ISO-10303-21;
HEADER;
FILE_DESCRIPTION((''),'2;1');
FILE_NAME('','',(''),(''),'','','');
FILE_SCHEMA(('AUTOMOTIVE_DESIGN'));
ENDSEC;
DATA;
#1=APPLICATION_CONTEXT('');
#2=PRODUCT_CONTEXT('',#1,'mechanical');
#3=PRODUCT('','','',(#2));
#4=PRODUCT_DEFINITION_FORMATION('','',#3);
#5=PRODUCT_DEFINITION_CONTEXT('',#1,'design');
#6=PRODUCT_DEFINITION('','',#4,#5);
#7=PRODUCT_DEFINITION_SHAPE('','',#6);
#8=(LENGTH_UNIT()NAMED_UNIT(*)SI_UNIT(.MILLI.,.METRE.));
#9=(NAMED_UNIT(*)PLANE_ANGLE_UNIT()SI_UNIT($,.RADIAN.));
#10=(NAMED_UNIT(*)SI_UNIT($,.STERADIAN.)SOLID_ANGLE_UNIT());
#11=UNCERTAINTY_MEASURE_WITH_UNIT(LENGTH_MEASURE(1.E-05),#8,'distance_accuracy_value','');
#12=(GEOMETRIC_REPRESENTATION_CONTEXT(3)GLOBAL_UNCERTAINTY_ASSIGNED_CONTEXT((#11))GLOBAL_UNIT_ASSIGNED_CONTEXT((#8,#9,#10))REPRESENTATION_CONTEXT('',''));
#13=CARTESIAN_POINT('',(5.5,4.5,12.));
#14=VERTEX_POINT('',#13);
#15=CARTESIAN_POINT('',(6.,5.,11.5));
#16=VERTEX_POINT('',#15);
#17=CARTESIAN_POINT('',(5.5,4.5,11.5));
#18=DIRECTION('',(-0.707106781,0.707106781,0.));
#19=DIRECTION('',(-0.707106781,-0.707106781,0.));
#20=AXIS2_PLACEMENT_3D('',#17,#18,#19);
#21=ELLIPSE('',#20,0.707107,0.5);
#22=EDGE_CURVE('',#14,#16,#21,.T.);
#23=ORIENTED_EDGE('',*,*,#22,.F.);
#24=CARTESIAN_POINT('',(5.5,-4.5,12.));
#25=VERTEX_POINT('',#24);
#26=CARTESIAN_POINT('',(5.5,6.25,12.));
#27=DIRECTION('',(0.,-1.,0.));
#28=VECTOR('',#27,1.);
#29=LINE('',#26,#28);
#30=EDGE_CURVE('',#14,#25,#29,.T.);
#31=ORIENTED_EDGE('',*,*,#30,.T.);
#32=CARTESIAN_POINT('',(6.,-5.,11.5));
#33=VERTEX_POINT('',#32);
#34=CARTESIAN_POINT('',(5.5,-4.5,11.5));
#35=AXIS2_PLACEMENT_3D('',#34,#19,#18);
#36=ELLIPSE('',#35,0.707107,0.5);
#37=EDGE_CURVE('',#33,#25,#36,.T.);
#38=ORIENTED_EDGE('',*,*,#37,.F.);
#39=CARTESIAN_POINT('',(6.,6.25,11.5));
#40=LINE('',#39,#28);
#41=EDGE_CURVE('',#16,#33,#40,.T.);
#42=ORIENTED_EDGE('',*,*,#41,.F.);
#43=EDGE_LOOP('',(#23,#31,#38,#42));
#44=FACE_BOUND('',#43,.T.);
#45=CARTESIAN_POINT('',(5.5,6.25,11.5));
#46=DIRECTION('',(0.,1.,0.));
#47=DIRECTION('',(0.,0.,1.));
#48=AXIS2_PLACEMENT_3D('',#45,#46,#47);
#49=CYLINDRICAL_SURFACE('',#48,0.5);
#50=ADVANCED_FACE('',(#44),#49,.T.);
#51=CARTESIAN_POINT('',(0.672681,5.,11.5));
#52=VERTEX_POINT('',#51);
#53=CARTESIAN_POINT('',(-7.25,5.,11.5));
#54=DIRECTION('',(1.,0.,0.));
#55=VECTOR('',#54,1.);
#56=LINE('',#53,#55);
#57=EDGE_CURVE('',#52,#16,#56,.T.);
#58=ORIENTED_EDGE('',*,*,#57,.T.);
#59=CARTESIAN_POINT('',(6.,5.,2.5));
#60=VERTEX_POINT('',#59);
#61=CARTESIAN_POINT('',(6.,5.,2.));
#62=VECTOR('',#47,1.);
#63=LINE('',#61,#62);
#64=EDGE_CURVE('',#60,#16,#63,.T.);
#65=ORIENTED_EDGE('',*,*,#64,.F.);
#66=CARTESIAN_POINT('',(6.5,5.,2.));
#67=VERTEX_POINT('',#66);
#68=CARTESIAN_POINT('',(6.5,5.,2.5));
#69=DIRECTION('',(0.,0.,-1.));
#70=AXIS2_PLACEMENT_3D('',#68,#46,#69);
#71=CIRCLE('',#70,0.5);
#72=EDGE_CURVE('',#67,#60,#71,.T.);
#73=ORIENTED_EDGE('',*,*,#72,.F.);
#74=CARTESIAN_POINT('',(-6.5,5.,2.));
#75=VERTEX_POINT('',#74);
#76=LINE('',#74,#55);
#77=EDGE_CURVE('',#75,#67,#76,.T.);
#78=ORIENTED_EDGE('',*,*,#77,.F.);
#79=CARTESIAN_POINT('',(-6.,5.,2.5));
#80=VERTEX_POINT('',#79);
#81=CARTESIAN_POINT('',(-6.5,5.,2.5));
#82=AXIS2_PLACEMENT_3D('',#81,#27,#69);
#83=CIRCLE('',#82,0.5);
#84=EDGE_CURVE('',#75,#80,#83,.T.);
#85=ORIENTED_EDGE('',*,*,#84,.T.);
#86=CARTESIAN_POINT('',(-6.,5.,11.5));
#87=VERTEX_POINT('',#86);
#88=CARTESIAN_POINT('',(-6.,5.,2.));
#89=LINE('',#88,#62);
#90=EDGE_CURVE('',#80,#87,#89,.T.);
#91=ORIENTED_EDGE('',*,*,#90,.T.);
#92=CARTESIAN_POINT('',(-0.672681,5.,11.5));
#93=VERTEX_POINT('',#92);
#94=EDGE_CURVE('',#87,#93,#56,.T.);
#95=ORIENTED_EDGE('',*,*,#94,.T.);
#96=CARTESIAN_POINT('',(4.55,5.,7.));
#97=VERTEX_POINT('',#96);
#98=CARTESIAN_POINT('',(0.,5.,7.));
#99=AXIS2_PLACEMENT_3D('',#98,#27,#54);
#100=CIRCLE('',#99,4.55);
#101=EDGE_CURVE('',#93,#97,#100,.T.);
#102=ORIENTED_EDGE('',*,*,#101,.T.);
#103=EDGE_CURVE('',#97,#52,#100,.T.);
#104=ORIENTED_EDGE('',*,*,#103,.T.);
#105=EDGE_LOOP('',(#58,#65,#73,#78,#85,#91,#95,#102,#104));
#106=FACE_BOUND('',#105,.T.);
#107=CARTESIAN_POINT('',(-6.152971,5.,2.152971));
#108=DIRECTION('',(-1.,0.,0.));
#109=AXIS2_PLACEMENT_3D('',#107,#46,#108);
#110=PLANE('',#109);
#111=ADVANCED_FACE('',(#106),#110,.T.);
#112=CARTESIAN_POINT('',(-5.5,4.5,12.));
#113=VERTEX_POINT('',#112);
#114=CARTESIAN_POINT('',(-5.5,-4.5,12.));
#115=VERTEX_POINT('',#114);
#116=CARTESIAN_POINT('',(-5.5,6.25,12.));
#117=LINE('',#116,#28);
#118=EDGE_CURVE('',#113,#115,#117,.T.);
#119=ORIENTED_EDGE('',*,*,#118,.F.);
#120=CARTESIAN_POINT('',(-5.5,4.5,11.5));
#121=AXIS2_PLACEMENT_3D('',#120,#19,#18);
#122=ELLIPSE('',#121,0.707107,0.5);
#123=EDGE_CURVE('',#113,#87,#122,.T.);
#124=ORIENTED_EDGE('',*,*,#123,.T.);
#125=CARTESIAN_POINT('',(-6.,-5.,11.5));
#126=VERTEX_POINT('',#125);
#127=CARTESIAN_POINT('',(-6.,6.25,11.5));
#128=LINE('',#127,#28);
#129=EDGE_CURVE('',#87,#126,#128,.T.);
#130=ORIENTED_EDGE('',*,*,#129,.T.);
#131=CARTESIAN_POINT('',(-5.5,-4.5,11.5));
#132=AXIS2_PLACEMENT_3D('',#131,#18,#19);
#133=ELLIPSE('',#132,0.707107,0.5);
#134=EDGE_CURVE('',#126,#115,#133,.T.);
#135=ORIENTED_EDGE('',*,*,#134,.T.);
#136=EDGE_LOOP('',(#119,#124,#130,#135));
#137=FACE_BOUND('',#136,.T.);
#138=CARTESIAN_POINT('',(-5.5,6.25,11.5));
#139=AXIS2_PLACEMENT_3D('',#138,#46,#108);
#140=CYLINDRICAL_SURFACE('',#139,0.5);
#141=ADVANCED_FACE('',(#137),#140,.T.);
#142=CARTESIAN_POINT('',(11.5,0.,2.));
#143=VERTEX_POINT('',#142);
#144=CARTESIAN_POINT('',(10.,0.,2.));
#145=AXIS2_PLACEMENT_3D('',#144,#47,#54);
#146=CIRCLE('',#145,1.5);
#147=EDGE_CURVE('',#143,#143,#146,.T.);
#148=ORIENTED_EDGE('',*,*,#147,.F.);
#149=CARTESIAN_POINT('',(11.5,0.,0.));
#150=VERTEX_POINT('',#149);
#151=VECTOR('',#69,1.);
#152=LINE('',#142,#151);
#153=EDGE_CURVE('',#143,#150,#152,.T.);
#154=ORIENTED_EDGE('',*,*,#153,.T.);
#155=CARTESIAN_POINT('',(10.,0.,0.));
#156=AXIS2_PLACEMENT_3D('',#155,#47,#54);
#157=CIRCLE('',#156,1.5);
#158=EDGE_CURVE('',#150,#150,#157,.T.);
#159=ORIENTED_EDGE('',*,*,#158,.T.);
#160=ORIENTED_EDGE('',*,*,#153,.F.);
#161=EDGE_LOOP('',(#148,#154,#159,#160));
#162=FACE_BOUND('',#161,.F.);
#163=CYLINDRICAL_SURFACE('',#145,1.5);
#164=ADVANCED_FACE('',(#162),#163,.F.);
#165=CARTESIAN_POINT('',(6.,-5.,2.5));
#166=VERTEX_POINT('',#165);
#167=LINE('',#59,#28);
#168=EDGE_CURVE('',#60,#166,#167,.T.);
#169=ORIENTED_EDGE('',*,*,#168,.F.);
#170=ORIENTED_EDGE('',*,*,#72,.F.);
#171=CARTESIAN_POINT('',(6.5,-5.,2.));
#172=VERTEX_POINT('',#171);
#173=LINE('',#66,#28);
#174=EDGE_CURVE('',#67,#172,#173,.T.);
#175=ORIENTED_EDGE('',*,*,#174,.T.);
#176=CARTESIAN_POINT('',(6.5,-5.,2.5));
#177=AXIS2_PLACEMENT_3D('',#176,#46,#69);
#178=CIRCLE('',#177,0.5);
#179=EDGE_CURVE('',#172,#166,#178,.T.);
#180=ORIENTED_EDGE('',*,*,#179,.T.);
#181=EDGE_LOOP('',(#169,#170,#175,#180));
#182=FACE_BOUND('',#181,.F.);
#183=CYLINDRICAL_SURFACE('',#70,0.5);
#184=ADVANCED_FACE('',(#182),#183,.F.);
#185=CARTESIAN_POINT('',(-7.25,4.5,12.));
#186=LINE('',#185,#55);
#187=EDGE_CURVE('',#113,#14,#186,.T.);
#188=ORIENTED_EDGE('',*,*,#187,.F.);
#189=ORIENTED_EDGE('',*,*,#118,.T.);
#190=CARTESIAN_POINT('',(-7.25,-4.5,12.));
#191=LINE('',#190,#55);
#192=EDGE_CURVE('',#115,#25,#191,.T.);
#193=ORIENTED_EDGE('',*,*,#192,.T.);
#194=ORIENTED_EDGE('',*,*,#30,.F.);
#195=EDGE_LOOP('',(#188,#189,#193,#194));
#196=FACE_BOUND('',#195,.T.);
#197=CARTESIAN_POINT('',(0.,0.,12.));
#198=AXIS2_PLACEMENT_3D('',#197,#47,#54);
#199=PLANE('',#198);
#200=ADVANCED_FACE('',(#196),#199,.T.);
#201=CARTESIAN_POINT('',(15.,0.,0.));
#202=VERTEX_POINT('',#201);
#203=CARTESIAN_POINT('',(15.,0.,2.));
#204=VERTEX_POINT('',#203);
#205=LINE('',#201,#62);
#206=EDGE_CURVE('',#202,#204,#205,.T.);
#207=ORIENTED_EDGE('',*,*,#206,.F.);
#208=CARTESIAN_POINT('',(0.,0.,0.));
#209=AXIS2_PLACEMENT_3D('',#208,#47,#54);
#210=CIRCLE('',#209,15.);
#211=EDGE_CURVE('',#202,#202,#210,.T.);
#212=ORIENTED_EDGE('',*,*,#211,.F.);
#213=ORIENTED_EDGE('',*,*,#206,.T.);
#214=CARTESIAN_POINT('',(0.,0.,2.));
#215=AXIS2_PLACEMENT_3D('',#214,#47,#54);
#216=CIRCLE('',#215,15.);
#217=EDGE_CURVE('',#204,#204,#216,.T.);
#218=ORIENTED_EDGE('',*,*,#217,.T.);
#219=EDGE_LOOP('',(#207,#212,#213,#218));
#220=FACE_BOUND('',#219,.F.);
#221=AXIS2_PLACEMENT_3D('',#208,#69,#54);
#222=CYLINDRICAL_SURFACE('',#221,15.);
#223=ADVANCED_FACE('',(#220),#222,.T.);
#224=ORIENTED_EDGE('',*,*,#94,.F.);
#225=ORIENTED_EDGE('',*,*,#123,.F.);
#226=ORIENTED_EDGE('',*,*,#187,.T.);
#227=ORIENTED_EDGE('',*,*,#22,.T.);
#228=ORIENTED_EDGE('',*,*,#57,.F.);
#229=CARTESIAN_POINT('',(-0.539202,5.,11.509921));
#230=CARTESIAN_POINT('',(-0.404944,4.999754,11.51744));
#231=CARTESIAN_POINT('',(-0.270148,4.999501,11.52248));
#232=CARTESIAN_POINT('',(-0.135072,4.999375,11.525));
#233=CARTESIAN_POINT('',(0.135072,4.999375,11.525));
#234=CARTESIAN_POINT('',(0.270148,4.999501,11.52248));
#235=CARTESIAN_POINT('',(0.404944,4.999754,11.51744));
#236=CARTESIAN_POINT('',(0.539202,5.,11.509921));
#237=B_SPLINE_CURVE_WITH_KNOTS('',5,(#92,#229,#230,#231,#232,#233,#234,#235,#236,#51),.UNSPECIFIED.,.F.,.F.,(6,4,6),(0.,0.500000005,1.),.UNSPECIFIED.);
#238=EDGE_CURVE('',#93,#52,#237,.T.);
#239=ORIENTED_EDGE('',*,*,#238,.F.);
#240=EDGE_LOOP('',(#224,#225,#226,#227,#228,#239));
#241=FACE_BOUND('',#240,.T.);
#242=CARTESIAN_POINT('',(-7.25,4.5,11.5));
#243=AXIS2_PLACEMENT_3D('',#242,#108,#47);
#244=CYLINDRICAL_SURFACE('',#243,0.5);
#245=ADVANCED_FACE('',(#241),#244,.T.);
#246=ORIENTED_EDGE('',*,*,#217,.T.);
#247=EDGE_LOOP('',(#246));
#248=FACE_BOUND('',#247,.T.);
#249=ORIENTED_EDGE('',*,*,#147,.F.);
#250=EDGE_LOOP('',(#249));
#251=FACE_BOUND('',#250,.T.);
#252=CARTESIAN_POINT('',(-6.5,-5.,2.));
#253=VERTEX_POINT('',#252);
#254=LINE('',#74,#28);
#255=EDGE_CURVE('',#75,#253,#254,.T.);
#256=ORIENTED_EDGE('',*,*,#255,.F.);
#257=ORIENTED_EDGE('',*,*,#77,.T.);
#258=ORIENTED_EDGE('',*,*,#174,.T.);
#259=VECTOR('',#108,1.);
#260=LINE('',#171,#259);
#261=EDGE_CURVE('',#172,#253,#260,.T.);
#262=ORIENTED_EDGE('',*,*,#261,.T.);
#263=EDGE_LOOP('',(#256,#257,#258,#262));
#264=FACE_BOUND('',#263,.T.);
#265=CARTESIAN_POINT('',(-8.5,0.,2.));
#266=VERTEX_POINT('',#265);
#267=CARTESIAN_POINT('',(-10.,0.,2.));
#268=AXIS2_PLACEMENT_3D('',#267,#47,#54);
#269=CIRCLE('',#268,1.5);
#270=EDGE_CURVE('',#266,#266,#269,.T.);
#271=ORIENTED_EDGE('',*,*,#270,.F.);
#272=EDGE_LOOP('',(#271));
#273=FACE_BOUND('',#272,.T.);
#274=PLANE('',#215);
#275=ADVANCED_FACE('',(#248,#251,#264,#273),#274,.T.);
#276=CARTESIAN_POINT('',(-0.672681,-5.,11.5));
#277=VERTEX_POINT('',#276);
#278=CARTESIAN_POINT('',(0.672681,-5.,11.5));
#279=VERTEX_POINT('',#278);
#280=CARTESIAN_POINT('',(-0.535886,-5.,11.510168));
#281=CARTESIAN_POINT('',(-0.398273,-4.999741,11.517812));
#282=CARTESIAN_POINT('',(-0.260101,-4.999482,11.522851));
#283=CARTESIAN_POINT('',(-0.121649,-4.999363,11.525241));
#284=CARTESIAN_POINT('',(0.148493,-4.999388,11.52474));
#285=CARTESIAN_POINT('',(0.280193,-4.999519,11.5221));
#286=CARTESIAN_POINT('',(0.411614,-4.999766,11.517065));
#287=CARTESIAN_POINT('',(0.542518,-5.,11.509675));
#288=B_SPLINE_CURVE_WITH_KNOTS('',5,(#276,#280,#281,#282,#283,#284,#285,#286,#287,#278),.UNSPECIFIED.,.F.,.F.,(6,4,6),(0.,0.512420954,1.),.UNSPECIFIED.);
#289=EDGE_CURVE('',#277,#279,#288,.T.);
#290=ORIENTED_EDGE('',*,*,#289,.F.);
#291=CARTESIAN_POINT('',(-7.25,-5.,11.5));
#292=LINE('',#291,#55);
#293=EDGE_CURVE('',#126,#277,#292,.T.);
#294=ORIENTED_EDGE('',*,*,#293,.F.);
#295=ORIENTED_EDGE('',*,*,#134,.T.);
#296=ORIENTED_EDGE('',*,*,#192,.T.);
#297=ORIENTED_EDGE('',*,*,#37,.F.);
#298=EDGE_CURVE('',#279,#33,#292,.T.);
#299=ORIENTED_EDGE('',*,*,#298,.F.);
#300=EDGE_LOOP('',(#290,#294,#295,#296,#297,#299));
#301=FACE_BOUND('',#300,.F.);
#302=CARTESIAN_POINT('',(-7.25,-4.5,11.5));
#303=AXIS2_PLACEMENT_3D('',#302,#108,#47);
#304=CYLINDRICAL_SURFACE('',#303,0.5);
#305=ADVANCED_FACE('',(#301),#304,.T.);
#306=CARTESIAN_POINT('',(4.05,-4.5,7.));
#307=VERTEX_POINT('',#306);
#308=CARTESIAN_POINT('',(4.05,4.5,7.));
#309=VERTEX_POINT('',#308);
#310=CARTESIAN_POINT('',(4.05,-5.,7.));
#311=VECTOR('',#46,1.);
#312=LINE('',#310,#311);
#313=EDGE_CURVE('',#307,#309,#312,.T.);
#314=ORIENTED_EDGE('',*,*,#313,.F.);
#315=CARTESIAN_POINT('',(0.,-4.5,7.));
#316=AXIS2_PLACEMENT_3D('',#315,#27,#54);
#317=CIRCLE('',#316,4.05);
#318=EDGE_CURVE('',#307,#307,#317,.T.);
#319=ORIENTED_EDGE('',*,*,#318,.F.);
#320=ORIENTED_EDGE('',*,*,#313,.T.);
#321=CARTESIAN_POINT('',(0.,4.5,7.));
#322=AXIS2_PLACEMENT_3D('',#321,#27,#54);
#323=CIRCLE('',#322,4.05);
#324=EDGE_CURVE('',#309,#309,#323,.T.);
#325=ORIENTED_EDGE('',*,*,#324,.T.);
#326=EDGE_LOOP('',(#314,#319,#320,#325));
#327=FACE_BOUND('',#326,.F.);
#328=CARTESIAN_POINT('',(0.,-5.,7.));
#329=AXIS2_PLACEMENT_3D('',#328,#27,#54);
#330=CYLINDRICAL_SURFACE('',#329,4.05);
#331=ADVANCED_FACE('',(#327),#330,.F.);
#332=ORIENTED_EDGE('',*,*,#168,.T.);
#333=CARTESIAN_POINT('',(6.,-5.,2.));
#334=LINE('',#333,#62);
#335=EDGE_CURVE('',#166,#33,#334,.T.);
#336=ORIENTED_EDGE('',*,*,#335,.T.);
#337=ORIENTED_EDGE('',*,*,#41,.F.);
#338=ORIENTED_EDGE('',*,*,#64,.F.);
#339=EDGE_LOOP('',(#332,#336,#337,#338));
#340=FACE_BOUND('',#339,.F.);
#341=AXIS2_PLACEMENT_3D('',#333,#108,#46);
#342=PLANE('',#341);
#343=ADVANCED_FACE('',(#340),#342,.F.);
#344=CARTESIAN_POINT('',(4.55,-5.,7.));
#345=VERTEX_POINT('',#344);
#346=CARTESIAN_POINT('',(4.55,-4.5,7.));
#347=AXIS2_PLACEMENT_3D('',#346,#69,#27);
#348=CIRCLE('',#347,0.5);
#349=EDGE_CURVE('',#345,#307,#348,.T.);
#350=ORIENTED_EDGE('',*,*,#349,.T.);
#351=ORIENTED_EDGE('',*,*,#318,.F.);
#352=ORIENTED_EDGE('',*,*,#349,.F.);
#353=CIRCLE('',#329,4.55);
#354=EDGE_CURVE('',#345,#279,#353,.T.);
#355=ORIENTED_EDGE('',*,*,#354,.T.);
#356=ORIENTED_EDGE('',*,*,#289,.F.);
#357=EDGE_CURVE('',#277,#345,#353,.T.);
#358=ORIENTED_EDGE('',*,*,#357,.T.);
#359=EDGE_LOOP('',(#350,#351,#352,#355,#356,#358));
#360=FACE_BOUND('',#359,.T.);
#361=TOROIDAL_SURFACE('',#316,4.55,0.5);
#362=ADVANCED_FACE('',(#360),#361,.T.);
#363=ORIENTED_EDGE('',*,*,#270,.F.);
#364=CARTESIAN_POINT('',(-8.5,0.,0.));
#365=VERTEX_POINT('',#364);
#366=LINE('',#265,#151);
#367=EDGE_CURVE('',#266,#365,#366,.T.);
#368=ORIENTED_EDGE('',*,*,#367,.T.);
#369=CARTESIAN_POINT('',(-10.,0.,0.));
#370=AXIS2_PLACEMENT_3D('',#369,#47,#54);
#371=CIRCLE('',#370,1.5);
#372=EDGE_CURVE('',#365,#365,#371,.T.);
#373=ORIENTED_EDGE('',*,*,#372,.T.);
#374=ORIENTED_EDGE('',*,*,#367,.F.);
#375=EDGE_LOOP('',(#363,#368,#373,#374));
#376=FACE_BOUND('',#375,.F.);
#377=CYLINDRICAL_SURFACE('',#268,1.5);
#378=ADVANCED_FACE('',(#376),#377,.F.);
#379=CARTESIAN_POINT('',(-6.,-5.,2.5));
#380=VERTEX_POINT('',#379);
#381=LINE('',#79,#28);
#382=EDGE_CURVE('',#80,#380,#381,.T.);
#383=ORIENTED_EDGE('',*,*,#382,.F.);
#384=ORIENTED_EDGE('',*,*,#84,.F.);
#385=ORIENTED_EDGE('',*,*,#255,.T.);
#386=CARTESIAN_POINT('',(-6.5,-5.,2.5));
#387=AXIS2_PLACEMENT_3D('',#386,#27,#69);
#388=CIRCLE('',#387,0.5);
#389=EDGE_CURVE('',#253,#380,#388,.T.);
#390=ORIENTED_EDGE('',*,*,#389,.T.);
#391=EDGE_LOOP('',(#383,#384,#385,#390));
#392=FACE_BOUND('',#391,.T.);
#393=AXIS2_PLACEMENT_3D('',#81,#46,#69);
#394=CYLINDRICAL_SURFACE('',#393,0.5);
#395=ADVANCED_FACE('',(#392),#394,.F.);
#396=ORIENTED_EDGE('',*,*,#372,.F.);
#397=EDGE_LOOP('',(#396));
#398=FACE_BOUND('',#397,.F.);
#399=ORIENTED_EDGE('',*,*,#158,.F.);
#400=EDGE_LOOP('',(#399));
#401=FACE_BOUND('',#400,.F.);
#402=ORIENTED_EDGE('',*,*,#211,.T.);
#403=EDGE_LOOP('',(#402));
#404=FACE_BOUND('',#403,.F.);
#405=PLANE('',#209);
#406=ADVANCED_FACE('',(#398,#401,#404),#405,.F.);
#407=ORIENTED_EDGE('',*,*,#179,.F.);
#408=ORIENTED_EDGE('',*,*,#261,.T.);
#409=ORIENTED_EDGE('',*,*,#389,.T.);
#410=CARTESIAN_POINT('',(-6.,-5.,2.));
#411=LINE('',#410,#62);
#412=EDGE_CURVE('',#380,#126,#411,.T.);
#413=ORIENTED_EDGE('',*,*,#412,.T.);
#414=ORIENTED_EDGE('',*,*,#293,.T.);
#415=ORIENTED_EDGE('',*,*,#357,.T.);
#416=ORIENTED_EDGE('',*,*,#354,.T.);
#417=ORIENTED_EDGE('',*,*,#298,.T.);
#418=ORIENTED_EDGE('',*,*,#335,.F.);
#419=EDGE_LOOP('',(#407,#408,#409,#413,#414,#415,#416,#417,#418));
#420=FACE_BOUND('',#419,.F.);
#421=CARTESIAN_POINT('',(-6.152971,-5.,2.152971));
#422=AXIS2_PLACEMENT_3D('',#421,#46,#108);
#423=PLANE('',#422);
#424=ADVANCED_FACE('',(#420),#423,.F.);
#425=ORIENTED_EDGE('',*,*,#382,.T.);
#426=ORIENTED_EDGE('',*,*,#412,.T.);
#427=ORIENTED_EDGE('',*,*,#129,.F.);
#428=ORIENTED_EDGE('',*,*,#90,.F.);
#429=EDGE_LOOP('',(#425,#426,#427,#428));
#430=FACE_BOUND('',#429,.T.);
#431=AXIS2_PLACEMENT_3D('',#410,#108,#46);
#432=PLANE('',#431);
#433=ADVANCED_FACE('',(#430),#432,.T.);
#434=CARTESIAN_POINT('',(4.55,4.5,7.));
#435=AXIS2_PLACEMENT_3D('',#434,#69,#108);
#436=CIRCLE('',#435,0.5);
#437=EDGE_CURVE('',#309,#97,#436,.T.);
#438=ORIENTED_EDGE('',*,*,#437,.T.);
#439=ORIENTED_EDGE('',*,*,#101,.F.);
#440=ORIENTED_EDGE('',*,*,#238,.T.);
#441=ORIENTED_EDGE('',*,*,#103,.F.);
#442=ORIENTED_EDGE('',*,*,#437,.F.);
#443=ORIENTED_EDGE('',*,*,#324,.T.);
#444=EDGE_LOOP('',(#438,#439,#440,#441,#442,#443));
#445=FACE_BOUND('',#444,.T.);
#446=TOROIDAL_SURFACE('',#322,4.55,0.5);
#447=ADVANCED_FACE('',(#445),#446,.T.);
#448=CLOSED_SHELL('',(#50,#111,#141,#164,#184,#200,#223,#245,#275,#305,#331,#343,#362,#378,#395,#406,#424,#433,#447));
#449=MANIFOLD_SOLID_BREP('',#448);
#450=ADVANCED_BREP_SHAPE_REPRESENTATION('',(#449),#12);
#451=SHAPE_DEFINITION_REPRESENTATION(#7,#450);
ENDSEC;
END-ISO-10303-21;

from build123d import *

# Parameters (mm, degrees)
F0_R        = 15
F1_DEPTH    = 2
F2_W        = 12
F2_H        = 10
F3_DEPTH    = 10
F4_R        = 4.05
F5_DEPTH    = 20.001
F6_R        = 1.5
F7_DEPTH    = 2.001
F8_T1_DEPTH = 10
F8_T3_DEPTH = 14.5
F8_T5_DEPTH = 12.5


# Not quite as in the source:
# - a fillet or chamfer that OpenCascade refuses, or shapes differently, is made with other operations: its cross-section is extruded or revolved along the edge and cut away or added


with BuildPart() as f1:
    # F0 (on Top) → F1 (new body)
    with BuildSketch(Plane.XY):
        Circle(F0_R)
    extrude(amount=F1_DEPTH)

    # F2 (on face) → F3 (join)
    with BuildSketch(Plane.XY.offset(2)):
        Rectangle(F2_W, F2_H)
    extrude(amount=F3_DEPTH)

    # F4 (on face) → F5 (cut, through all)
    with BuildSketch(Plane.XZ.offset(5)):
        with Locations((0, 7)):
            Circle(F4_R)
    extrude(amount=-F5_DEPTH, mode=Mode.SUBTRACT)

    # F6 (on face) → F7 (cut, through all)
    with BuildSketch(Plane.XY.offset(2)):
        with Locations((10, 0)):
            Circle(F6_R)
        with Locations((-10, 0)):
            Circle(F6_R)
    extrude(amount=-F7_DEPTH, mode=Mode.SUBTRACT)

    # F8: fillet of radius 0.5 on 8 edges, made by hand

    # F8_s2 → F8_t1 (join)
    with BuildSketch(Plane.XZ.offset(-5)):
        with BuildLine():
            ThreePointArc((-6.5, 2), (-6.1464466094, 2.1464466094), (-6, 2.5))
            Line((-6, 2.5), (-6, 2))
            Line((-6, 2), (-6.5, 2))
        make_face()
        with BuildLine():
            ThreePointArc((6.5, 2), (6.1464466094, 2.1464466094), (6, 2.5))
            Line((6, 2.5), (6, 2))
            Line((6, 2), (6.5, 2))
        make_face()
    extrude(amount=F8_T1_DEPTH)

    # F8_s4 → F8_t3 (cut)
    with BuildSketch(Plane.YZ.offset(-7.25)):
        with BuildLine():
            ThreePointArc((-4.5, 12), (-4.8535533906, 11.8535533906), (-5, 11.5))
            Line((-5, 11.5), (-5, 12))
            Line((-5, 12), (-4.5, 12))
        make_face()
        with BuildLine():
            ThreePointArc((4.5, 12), (4.8535533906, 11.8535533906), (5, 11.5))
            Line((5, 11.5), (5, 12))
            Line((5, 12), (4.5, 12))
        make_face()
    extrude(amount=F8_T3_DEPTH, mode=Mode.SUBTRACT)

    # F8_s6 → F8_t5 (cut)
    with BuildSketch(Plane.XZ.offset(-6.25)):
        with BuildLine():
            ThreePointArc((5.5, 12), (5.8535533906, 11.8535533906), (6, 11.5))
            Line((6, 11.5), (6, 12))
            Line((6, 12), (5.5, 12))
        make_face()
        with BuildLine():
            ThreePointArc((-6, 11.5), (-5.8535533906, 11.8535533906), (-5.5, 12))
            Line((-5.5, 12), (-6, 12))
            Line((-6, 12), (-6, 11.5))
        make_face()
    extrude(amount=F8_T5_DEPTH, mode=Mode.SUBTRACT)

    # F8_s7 → F8_t8 (revolve, cut)
    with BuildSketch(Plane.XY.offset(7)):
        with BuildLine():
            ThreePointArc((4.05, 4.5), (4.1964466094, 4.8535533906), (4.55, 5))
            Line((4.55, 5), (4.05, 5))
            Line((4.05, 5), (4.05, 4.5))
        make_face()
    revolve(axis=Axis((0, 5, 7), (0, -1, 0)), mode=Mode.SUBTRACT)

    # F8_s9 → F8_t10 (revolve, cut)
    with BuildSketch(Plane.XY.offset(7)):
        with BuildLine():
            ThreePointArc((4.55, -5), (4.1964466094, -4.8535533906), (4.05, -4.5))
            Line((4.05, -4.5), (4.05, -5))
            Line((4.05, -5), (4.55, -5))
        make_face()
    revolve(axis=Axis((0, -5, 7), (0, -1, 0)), mode=Mode.SUBTRACT)


solid = f1.part
